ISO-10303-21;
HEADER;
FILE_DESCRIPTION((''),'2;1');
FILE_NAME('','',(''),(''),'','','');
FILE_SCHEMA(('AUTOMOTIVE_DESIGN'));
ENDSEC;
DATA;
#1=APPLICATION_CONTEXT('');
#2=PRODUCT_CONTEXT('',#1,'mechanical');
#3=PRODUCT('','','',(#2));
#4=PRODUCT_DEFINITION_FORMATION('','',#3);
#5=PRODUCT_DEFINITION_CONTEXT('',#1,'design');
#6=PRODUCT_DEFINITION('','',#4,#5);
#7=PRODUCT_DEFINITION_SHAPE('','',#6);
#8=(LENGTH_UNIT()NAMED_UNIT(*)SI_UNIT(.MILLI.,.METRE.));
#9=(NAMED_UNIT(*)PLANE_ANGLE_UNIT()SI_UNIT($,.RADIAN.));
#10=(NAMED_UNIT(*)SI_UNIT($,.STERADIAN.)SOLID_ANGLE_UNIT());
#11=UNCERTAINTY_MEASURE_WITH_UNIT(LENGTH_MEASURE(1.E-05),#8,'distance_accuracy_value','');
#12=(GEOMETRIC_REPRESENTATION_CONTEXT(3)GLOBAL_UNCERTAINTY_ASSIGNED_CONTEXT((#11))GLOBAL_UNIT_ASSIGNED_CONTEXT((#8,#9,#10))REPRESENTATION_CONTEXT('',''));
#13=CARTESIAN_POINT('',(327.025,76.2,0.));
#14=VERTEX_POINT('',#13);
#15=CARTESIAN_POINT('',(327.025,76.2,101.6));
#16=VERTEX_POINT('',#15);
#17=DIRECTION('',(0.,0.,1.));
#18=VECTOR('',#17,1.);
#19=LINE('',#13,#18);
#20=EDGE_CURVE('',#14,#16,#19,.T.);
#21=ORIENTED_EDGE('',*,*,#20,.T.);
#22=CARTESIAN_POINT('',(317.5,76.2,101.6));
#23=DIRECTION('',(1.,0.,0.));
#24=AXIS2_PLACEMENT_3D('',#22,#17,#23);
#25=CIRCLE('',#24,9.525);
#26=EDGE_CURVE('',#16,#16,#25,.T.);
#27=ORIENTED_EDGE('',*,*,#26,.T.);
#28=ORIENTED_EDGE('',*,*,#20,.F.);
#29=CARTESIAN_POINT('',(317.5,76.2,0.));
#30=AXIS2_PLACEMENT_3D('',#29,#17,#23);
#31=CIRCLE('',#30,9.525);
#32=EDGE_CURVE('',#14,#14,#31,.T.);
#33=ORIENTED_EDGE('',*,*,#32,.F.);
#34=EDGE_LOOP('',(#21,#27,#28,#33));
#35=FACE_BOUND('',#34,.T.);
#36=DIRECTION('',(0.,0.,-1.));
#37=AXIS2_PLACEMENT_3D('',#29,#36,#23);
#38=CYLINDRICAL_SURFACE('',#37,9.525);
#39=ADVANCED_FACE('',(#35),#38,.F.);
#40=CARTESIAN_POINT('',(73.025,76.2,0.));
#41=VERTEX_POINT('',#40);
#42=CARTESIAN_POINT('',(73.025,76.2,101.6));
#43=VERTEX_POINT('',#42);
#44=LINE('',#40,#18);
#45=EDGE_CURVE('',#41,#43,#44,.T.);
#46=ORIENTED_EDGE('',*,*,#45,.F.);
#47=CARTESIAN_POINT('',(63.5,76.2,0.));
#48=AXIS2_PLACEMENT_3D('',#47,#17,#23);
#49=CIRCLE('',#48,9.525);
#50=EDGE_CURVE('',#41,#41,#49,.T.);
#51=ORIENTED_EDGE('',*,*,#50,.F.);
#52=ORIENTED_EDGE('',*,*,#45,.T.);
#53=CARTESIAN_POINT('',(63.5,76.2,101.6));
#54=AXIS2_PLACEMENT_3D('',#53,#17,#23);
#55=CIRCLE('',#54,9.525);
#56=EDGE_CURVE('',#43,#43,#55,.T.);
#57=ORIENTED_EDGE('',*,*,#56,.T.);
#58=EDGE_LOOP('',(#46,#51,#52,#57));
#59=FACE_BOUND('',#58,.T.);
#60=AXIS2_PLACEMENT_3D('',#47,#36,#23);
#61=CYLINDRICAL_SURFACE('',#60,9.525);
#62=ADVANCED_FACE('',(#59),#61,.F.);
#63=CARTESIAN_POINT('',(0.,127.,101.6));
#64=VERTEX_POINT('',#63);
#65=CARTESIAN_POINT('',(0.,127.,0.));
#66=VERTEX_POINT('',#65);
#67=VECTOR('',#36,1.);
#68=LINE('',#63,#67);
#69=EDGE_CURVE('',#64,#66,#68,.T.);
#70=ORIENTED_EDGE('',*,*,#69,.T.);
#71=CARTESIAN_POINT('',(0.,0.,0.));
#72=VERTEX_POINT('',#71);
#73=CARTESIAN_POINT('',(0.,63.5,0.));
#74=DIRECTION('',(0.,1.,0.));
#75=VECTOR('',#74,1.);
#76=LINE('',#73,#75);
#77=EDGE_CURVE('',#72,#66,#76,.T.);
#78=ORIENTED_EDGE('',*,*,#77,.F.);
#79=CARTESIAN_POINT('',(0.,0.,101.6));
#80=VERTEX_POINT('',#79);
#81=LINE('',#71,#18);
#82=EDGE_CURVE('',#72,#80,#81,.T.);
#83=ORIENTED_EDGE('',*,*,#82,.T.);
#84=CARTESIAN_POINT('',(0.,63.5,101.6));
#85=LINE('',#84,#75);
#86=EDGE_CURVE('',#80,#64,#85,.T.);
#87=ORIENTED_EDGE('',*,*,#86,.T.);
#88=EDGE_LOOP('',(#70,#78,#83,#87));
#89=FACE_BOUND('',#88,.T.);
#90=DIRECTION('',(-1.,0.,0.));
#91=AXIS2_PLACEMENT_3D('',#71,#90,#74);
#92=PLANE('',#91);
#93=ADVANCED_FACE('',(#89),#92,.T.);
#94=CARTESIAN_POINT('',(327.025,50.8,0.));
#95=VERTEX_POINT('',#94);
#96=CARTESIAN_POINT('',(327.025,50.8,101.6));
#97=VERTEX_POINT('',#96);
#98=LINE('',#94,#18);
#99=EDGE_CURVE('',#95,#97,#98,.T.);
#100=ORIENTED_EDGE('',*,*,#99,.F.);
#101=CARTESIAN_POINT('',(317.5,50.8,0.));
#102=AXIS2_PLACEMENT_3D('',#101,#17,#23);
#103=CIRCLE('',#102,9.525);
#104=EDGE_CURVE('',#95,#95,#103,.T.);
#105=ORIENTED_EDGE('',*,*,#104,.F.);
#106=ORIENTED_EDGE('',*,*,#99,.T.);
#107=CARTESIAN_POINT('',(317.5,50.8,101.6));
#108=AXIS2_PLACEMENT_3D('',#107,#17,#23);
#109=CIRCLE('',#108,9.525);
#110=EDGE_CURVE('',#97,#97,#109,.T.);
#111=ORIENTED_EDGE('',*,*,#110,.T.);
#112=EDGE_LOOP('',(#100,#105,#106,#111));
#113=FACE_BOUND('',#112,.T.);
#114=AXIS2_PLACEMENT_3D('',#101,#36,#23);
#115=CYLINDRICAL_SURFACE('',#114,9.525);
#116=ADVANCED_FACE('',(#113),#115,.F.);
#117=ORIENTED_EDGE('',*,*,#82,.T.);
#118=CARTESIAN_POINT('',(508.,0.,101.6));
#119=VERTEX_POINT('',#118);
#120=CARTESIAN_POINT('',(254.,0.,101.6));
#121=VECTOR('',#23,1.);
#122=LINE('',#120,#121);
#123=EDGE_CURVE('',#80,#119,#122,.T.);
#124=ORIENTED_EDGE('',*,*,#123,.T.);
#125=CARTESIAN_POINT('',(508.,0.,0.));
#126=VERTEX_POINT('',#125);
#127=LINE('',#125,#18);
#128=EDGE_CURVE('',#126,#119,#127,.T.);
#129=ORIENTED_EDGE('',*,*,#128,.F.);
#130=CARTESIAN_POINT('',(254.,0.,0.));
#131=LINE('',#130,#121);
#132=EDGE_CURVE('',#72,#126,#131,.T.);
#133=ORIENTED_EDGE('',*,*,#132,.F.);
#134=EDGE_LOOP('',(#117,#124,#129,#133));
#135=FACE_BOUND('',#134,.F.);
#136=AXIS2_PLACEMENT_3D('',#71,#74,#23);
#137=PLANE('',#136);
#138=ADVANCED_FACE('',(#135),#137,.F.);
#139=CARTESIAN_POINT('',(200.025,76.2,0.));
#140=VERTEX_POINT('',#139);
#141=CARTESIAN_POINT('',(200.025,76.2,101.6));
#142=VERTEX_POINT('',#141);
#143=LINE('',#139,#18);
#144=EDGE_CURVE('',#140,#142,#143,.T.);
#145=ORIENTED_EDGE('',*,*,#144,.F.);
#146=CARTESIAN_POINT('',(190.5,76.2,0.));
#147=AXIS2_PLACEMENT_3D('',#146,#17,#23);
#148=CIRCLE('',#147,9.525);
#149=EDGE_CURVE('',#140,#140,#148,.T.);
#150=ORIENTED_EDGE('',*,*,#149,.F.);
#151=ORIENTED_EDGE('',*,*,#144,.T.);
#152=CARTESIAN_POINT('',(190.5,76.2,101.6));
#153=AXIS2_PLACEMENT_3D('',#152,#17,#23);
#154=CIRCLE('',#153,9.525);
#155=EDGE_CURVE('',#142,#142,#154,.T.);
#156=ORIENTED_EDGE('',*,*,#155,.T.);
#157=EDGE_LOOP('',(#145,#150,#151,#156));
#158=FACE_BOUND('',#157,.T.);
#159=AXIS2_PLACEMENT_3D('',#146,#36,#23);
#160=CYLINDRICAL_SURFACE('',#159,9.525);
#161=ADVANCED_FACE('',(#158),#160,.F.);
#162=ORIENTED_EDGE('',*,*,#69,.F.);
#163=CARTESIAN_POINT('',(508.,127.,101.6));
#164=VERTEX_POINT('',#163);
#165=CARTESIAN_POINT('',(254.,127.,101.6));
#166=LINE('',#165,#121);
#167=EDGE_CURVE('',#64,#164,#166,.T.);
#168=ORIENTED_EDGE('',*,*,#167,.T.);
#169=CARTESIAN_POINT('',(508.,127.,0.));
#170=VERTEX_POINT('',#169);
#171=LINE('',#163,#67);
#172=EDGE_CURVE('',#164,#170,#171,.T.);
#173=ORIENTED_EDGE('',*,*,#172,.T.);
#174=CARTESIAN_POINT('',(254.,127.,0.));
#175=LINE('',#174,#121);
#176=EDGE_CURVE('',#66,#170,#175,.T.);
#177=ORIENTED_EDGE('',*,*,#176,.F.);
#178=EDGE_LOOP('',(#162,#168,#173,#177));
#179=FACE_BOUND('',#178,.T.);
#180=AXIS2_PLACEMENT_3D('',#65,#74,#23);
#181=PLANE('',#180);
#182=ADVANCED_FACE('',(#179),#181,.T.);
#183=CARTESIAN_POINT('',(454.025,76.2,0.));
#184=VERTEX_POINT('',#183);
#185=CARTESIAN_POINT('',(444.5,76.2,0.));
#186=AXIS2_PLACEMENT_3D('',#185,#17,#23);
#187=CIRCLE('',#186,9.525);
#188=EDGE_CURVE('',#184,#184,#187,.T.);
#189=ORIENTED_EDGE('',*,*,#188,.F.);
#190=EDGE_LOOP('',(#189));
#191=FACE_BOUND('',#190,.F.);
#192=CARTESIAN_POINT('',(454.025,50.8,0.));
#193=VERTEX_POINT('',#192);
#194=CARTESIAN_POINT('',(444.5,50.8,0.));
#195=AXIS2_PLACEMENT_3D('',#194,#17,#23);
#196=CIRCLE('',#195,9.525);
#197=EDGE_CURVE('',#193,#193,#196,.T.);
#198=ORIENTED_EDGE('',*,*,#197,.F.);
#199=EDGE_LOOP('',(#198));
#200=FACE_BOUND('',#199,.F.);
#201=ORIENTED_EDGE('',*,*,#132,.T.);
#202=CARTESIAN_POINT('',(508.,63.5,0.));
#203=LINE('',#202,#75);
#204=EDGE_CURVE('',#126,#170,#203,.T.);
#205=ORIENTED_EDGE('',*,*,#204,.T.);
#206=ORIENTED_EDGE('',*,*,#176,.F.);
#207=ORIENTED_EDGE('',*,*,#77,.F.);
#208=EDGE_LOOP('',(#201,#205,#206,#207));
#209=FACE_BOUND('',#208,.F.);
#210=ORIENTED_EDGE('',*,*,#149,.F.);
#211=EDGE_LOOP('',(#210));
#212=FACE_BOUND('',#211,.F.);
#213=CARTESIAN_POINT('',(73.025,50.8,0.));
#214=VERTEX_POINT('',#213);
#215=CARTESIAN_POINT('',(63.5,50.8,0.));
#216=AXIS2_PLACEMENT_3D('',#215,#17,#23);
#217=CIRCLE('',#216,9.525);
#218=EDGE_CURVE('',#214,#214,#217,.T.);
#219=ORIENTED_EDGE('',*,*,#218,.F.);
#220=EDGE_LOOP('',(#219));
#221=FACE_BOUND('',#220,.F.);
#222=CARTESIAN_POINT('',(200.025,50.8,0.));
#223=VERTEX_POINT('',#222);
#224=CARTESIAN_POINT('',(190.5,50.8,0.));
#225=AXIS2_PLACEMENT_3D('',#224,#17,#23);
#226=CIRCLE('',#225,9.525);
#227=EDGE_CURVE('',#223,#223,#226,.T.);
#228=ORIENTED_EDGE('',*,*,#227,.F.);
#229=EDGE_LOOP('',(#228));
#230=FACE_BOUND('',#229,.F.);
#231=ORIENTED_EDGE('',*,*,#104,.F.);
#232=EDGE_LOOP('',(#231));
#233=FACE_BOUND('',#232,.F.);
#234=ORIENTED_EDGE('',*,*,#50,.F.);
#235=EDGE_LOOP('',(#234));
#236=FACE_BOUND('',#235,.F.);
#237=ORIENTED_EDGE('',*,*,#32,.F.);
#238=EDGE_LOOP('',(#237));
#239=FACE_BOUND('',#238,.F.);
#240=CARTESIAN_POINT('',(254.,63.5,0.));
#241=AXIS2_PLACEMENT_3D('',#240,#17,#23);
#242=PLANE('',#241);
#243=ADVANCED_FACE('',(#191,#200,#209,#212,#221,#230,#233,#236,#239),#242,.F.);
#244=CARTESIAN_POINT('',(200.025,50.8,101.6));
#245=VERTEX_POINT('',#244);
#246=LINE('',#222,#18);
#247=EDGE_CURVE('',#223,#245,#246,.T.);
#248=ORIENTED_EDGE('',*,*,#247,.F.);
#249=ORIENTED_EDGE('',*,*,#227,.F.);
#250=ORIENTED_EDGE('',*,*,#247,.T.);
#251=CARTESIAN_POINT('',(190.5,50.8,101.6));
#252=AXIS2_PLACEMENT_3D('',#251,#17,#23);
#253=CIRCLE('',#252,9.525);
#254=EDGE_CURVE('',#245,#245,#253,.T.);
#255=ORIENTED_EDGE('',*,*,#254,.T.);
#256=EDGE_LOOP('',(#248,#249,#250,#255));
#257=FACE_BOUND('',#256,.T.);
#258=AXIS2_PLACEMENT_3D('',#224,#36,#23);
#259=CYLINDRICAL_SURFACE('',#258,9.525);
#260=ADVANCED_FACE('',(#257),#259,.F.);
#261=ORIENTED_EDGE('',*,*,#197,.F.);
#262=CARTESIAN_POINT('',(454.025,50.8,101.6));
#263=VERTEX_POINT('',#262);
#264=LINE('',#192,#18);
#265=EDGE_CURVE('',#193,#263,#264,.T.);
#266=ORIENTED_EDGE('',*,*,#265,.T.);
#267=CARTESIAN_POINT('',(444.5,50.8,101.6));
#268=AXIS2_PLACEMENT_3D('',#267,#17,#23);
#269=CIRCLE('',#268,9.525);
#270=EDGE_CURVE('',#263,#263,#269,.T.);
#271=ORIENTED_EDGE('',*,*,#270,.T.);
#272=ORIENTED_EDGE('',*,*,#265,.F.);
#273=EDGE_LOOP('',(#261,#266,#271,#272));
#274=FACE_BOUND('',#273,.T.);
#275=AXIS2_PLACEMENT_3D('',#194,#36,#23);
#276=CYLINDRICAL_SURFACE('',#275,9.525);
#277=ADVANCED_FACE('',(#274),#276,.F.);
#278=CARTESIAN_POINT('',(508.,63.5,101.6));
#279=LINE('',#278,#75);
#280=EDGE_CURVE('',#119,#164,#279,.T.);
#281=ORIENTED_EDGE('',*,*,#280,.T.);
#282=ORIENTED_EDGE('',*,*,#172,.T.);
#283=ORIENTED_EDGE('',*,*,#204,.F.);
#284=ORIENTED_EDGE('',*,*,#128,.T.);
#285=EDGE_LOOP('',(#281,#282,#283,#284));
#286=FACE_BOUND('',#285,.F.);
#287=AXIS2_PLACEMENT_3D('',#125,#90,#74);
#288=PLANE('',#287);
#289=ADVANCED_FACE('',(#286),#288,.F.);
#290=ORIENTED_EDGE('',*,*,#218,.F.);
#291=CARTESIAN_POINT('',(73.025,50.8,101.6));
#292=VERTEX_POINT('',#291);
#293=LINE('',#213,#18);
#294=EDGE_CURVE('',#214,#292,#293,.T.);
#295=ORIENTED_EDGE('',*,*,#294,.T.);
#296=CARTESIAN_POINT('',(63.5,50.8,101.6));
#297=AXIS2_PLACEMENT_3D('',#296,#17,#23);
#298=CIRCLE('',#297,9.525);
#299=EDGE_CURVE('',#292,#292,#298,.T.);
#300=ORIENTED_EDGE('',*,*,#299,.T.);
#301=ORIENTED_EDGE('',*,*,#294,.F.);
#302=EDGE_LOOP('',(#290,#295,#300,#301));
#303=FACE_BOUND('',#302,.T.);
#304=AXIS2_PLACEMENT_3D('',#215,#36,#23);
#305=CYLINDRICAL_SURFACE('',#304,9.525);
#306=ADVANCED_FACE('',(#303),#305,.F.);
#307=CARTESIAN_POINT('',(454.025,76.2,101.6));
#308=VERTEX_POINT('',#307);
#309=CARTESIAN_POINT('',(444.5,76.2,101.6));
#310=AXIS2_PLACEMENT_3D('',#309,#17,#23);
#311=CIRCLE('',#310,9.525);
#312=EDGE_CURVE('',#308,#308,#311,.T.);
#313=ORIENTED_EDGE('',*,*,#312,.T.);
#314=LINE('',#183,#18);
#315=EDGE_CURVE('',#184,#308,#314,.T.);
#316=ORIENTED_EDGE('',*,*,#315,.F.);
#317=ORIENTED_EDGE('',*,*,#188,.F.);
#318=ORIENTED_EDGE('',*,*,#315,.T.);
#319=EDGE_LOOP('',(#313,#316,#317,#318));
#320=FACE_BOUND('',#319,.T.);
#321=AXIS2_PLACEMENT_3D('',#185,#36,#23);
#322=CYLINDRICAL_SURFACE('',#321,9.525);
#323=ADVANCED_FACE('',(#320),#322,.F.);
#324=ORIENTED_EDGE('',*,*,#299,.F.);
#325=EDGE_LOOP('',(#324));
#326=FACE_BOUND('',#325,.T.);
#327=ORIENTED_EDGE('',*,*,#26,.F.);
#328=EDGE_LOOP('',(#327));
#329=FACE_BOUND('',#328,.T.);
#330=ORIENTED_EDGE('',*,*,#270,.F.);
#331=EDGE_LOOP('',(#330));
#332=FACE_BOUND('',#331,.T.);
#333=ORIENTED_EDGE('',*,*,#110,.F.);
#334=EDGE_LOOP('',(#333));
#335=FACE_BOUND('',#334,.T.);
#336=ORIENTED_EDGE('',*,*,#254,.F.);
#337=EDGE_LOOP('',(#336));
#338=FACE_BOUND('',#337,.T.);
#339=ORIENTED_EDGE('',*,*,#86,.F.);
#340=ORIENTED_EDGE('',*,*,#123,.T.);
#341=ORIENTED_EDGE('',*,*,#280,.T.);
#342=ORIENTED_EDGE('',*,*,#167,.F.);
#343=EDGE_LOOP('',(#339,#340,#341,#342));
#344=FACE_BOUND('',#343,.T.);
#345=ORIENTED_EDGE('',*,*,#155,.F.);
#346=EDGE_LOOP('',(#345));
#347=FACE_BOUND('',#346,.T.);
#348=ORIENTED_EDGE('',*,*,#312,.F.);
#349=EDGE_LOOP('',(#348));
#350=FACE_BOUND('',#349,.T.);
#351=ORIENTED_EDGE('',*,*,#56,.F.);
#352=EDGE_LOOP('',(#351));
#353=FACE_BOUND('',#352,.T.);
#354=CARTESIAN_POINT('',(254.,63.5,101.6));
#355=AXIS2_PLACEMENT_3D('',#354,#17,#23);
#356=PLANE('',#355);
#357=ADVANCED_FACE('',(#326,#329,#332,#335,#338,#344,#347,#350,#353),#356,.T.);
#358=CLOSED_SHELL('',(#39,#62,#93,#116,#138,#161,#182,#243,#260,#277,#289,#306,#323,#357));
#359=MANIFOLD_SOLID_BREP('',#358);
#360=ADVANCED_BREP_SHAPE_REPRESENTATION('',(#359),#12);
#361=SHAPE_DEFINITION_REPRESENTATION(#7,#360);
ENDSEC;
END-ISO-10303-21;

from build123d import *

# Parameters (mm, degrees)
F0_W     = 508
F0_H     = 127
F0_R     = 9.525
F1_DEPTH = 25.4
F3_DEPTH = 101.6


# Not quite as in the source:
# - a fillet or chamfer that OpenCascade refuses, or shapes differently, is made with other operations: its cross-section is extruded or revolved along the edge and cut away or added


with BuildPart() as f1:
    # F0 (on Top) → F1 (new body)
    with BuildSketch(Plane.XY):
        with Locations((254, 63.5)):
            Rectangle(F0_W, F0_H)
        with Locations((63.5, 50.8)):
            Circle(F0_R, mode=Mode.SUBTRACT)
        with Locations((190.5, 50.8)):
            Circle(F0_R, mode=Mode.SUBTRACT)
        with Locations((317.5, 50.8)):
            Circle(F0_R, mode=Mode.SUBTRACT)
        with Locations((444.5, 50.8)):
            Circle(F0_R, mode=Mode.SUBTRACT)
        with Locations((63.5, 76.2)):
            Circle(F0_R, mode=Mode.SUBTRACT)
        with Locations((190.5, 76.2)):
            Circle(F0_R, mode=Mode.SUBTRACT)
        with Locations((317.5, 76.2)):
            Circle(F0_R, mode=Mode.SUBTRACT)
        with Locations((444.5, 76.2)):
            Circle(F0_R, mode=Mode.SUBTRACT)
    extrude(amount=F1_DEPTH)

    # F2: fillet of radius 5.08 on 16 edges, made by hand

    # F2_s1 → F2_t2 (revolve, cut)
    with BuildSketch(Plane.XZ.offset(-76.2)):
        with BuildLine():
            ThreePointArc((200.025, 20.32), (201.5128975516, 23.9121024484), (205.105, 25.4))
            Line((205.105, 25.4), (200.025, 25.4))
            Line((200.025, 25.4), (200.025, 20.32))
        make_face()
    revolve(axis=Axis((190.5, 76.2, 25.4), (0, 0, 1)), mode=Mode.SUBTRACT)

    # F2_s3 → F2_t4 (revolve, cut)
    with BuildSketch(Plane.XZ.offset(-50.8)):
        with BuildLine():
            ThreePointArc((200.025, 20.32), (201.5128975516, 23.9121024484), (205.105, 25.4))
            Line((205.105, 25.4), (200.025, 25.4))
            Line((200.025, 25.4), (200.025, 20.32))
        make_face()
    revolve(axis=Axis((190.5, 50.8, 25.4), (0, 0, 1)), mode=Mode.SUBTRACT)

    # F2_s5 → F2_t6 (revolve, cut)
    with BuildSketch(Plane.XZ.offset(-76.2)):
        with BuildLine():
            ThreePointArc((327.025, 20.32), (328.5128975516, 23.9121024484), (332.105, 25.4))
            Line((332.105, 25.4), (327.025, 25.4))
            Line((327.025, 25.4), (327.025, 20.32))
        make_face()
    revolve(axis=Axis((317.5, 76.2, 25.4), (0, 0, 1)), mode=Mode.SUBTRACT)

    # F2_s7 → F2_t8 (revolve, cut)
    with BuildSketch(Plane.XZ.offset(-50.8)):
        with BuildLine():
            ThreePointArc((327.025, 20.32), (328.5128975516, 23.9121024484), (332.105, 25.4))
            Line((332.105, 25.4), (327.025, 25.4))
            Line((327.025, 25.4), (327.025, 20.32))
        make_face()
    revolve(axis=Axis((317.5, 50.8, 25.4), (0, 0, 1)), mode=Mode.SUBTRACT)

    # F2_s9 → F2_t10 (revolve, cut)
    with BuildSketch(Plane.XZ.offset(-76.2)):
        with BuildLine():
            ThreePointArc((73.025, 20.32), (74.5128975516, 23.9121024484), (78.105, 25.4))
            Line((78.105, 25.4), (73.025, 25.4))
            Line((73.025, 25.4), (73.025, 20.32))
        make_face()
    revolve(axis=Axis((63.5, 76.2, 25.4), (0, 0, 1)), mode=Mode.SUBTRACT)

    # F2_s11 → F2_t12 (revolve, cut)
    with BuildSketch(Plane.XZ.offset(-50.8)):
        with BuildLine():
            ThreePointArc((73.025, 20.32), (74.5128975516, 23.9121024484), (78.105, 25.4))
            Line((78.105, 25.4), (73.025, 25.4))
            Line((73.025, 25.4), (73.025, 20.32))
        make_face()
    revolve(axis=Axis((63.5, 50.8, 25.4), (0, 0, 1)), mode=Mode.SUBTRACT)

    # F2_s13 → F2_t14 (revolve, cut)
    with BuildSketch(Plane.XZ.offset(-76.2)):
        with BuildLine():
            ThreePointArc((454.025, 20.32), (455.5128975516, 23.9121024484), (459.105, 25.4))
            Line((459.105, 25.4), (454.025, 25.4))
            Line((454.025, 25.4), (454.025, 20.32))
        make_face()
    revolve(axis=Axis((444.5, 76.2, 25.4), (0, 0, 1)), mode=Mode.SUBTRACT)

    # F2_s15 → F2_t16 (revolve, cut)
    with BuildSketch(Plane.XZ.offset(-50.8)):
        with BuildLine():
            ThreePointArc((454.025, 20.32), (455.5128975516, 23.9121024484), (459.105, 25.4))
            Line((459.105, 25.4), (454.025, 25.4))
            Line((454.025, 25.4), (454.025, 20.32))
        make_face()
    revolve(axis=Axis((444.5, 50.8, 25.4), (0, 0, 1)), mode=Mode.SUBTRACT)

    # F2_s17 → F2_t18 (revolve, cut)
    with BuildSketch(Plane.XZ.offset(-50.8)):
        with BuildLine():
            ThreePointArc((200.025, 5.08), (201.5128975516, 1.4878975516), (205.105, 0))
            Line((205.105, 0), (200.025, 0))
            Line((200.025, 0), (200.025, 5.08))
        make_face()
    revolve(axis=Axis((190.5, 50.8, 0), (0, 0, 1)), mode=Mode.SUBTRACT)

    # F2_s19 → F2_t20 (revolve, cut)
    with BuildSketch(Plane.XZ.offset(-76.2)):
        with BuildLine():
            ThreePointArc((200.025, 5.08), (201.5128975516, 1.4878975516), (205.105, 0))
            Line((205.105, 0), (200.025, 0))
            Line((200.025, 0), (200.025, 5.08))
        make_face()
    revolve(axis=Axis((190.5, 76.2, 0), (0, 0, 1)), mode=Mode.SUBTRACT)

    # F2_s21 → F2_t22 (revolve, cut)
    with BuildSketch(Plane.XZ.offset(-50.8)):
        with BuildLine():
            ThreePointArc((327.025, 5.08), (328.5128975516, 1.4878975516), (332.105, 0))
            Line((332.105, 0), (327.025, 0))
            Line((327.025, 0), (327.025, 5.08))
        make_face()
    revolve(axis=Axis((317.5, 50.8, 0), (0, 0, 1)), mode=Mode.SUBTRACT)

    # F2_s23 → F2_t24 (revolve, cut)
    with BuildSketch(Plane.XZ.offset(-76.2)):
        with BuildLine():
            ThreePointArc((327.025, 5.08), (328.5128975516, 1.4878975516), (332.105, 0))
            Line((332.105, 0), (327.025, 0))
            Line((327.025, 0), (327.025, 5.08))
        make_face()
    revolve(axis=Axis((317.5, 76.2, 0), (0, 0, 1)), mode=Mode.SUBTRACT)

    # F2_s25 → F2_t26 (revolve, cut)
    with BuildSketch(Plane.XZ.offset(-50.8)):
        with BuildLine():
            ThreePointArc((454.025, 5.08), (455.5128975516, 1.4878975516), (459.105, 0))
            Line((459.105, 0), (454.025, 0))
            Line((454.025, 0), (454.025, 5.08))
        make_face()
    revolve(axis=Axis((444.5, 50.8, 0), (0, 0, 1)), mode=Mode.SUBTRACT)

    # F2_s27 → F2_t28 (revolve, cut)
    with BuildSketch(Plane.XZ.offset(-76.2)):
        with BuildLine():
            ThreePointArc((454.025, 5.08), (455.5128975516, 1.4878975516), (459.105, 0))
            Line((459.105, 0), (454.025, 0))
            Line((454.025, 0), (454.025, 5.08))
        make_face()
    revolve(axis=Axis((444.5, 76.2, 0), (0, 0, 1)), mode=Mode.SUBTRACT)

    # F2_s29 → F2_t30 (revolve, cut)
    with BuildSketch(Plane.XZ.offset(-76.2)):
        with BuildLine():
            ThreePointArc((73.025, 5.08), (74.5128975516, 1.4878975516), (78.105, 0))
            Line((78.105, 0), (73.025, 0))
            Line((73.025, 0), (73.025, 5.08))
        make_face()
    revolve(axis=Axis((63.5, 76.2, 0), (0, 0, 1)), mode=Mode.SUBTRACT)

    # F2_s31 → F2_t32 (revolve, cut)
    with BuildSketch(Plane.XZ.offset(-50.8)):
        with BuildLine():
            ThreePointArc((73.025, 5.08), (74.5128975516, 1.4878975516), (78.105, 0))
            Line((78.105, 0), (73.025, 0))
            Line((73.025, 0), (73.025, 5.08))
        make_face()
    revolve(axis=Axis((63.5, 50.8, 0), (0, 0, 1)), mode=Mode.SUBTRACT)

    # F0 (on Top) → F3 (join)
    with BuildSketch(Plane.XY):
        with Locations((254, 63.5)):
            Rectangle(F0_W, F0_H)
        with Locations((63.5, 50.8)):
            Circle(F0_R, mode=Mode.SUBTRACT)
        with Locations((190.5, 50.8)):
            Circle(F0_R, mode=Mode.SUBTRACT)
        with Locations((317.5, 50.8)):
            Circle(F0_R, mode=Mode.SUBTRACT)
        with Locations((444.5, 50.8)):
            Circle(F0_R, mode=Mode.SUBTRACT)
        with Locations((63.5, 76.2)):
            Circle(F0_R, mode=Mode.SUBTRACT)
        with Locations((190.5, 76.2)):
            Circle(F0_R, mode=Mode.SUBTRACT)
        with Locations((317.5, 76.2)):
            Circle(F0_R, mode=Mode.SUBTRACT)
        with Locations((444.5, 76.2)):
            Circle(F0_R, mode=Mode.SUBTRACT)
    extrude(amount=F3_DEPTH)


solid = f1.part
